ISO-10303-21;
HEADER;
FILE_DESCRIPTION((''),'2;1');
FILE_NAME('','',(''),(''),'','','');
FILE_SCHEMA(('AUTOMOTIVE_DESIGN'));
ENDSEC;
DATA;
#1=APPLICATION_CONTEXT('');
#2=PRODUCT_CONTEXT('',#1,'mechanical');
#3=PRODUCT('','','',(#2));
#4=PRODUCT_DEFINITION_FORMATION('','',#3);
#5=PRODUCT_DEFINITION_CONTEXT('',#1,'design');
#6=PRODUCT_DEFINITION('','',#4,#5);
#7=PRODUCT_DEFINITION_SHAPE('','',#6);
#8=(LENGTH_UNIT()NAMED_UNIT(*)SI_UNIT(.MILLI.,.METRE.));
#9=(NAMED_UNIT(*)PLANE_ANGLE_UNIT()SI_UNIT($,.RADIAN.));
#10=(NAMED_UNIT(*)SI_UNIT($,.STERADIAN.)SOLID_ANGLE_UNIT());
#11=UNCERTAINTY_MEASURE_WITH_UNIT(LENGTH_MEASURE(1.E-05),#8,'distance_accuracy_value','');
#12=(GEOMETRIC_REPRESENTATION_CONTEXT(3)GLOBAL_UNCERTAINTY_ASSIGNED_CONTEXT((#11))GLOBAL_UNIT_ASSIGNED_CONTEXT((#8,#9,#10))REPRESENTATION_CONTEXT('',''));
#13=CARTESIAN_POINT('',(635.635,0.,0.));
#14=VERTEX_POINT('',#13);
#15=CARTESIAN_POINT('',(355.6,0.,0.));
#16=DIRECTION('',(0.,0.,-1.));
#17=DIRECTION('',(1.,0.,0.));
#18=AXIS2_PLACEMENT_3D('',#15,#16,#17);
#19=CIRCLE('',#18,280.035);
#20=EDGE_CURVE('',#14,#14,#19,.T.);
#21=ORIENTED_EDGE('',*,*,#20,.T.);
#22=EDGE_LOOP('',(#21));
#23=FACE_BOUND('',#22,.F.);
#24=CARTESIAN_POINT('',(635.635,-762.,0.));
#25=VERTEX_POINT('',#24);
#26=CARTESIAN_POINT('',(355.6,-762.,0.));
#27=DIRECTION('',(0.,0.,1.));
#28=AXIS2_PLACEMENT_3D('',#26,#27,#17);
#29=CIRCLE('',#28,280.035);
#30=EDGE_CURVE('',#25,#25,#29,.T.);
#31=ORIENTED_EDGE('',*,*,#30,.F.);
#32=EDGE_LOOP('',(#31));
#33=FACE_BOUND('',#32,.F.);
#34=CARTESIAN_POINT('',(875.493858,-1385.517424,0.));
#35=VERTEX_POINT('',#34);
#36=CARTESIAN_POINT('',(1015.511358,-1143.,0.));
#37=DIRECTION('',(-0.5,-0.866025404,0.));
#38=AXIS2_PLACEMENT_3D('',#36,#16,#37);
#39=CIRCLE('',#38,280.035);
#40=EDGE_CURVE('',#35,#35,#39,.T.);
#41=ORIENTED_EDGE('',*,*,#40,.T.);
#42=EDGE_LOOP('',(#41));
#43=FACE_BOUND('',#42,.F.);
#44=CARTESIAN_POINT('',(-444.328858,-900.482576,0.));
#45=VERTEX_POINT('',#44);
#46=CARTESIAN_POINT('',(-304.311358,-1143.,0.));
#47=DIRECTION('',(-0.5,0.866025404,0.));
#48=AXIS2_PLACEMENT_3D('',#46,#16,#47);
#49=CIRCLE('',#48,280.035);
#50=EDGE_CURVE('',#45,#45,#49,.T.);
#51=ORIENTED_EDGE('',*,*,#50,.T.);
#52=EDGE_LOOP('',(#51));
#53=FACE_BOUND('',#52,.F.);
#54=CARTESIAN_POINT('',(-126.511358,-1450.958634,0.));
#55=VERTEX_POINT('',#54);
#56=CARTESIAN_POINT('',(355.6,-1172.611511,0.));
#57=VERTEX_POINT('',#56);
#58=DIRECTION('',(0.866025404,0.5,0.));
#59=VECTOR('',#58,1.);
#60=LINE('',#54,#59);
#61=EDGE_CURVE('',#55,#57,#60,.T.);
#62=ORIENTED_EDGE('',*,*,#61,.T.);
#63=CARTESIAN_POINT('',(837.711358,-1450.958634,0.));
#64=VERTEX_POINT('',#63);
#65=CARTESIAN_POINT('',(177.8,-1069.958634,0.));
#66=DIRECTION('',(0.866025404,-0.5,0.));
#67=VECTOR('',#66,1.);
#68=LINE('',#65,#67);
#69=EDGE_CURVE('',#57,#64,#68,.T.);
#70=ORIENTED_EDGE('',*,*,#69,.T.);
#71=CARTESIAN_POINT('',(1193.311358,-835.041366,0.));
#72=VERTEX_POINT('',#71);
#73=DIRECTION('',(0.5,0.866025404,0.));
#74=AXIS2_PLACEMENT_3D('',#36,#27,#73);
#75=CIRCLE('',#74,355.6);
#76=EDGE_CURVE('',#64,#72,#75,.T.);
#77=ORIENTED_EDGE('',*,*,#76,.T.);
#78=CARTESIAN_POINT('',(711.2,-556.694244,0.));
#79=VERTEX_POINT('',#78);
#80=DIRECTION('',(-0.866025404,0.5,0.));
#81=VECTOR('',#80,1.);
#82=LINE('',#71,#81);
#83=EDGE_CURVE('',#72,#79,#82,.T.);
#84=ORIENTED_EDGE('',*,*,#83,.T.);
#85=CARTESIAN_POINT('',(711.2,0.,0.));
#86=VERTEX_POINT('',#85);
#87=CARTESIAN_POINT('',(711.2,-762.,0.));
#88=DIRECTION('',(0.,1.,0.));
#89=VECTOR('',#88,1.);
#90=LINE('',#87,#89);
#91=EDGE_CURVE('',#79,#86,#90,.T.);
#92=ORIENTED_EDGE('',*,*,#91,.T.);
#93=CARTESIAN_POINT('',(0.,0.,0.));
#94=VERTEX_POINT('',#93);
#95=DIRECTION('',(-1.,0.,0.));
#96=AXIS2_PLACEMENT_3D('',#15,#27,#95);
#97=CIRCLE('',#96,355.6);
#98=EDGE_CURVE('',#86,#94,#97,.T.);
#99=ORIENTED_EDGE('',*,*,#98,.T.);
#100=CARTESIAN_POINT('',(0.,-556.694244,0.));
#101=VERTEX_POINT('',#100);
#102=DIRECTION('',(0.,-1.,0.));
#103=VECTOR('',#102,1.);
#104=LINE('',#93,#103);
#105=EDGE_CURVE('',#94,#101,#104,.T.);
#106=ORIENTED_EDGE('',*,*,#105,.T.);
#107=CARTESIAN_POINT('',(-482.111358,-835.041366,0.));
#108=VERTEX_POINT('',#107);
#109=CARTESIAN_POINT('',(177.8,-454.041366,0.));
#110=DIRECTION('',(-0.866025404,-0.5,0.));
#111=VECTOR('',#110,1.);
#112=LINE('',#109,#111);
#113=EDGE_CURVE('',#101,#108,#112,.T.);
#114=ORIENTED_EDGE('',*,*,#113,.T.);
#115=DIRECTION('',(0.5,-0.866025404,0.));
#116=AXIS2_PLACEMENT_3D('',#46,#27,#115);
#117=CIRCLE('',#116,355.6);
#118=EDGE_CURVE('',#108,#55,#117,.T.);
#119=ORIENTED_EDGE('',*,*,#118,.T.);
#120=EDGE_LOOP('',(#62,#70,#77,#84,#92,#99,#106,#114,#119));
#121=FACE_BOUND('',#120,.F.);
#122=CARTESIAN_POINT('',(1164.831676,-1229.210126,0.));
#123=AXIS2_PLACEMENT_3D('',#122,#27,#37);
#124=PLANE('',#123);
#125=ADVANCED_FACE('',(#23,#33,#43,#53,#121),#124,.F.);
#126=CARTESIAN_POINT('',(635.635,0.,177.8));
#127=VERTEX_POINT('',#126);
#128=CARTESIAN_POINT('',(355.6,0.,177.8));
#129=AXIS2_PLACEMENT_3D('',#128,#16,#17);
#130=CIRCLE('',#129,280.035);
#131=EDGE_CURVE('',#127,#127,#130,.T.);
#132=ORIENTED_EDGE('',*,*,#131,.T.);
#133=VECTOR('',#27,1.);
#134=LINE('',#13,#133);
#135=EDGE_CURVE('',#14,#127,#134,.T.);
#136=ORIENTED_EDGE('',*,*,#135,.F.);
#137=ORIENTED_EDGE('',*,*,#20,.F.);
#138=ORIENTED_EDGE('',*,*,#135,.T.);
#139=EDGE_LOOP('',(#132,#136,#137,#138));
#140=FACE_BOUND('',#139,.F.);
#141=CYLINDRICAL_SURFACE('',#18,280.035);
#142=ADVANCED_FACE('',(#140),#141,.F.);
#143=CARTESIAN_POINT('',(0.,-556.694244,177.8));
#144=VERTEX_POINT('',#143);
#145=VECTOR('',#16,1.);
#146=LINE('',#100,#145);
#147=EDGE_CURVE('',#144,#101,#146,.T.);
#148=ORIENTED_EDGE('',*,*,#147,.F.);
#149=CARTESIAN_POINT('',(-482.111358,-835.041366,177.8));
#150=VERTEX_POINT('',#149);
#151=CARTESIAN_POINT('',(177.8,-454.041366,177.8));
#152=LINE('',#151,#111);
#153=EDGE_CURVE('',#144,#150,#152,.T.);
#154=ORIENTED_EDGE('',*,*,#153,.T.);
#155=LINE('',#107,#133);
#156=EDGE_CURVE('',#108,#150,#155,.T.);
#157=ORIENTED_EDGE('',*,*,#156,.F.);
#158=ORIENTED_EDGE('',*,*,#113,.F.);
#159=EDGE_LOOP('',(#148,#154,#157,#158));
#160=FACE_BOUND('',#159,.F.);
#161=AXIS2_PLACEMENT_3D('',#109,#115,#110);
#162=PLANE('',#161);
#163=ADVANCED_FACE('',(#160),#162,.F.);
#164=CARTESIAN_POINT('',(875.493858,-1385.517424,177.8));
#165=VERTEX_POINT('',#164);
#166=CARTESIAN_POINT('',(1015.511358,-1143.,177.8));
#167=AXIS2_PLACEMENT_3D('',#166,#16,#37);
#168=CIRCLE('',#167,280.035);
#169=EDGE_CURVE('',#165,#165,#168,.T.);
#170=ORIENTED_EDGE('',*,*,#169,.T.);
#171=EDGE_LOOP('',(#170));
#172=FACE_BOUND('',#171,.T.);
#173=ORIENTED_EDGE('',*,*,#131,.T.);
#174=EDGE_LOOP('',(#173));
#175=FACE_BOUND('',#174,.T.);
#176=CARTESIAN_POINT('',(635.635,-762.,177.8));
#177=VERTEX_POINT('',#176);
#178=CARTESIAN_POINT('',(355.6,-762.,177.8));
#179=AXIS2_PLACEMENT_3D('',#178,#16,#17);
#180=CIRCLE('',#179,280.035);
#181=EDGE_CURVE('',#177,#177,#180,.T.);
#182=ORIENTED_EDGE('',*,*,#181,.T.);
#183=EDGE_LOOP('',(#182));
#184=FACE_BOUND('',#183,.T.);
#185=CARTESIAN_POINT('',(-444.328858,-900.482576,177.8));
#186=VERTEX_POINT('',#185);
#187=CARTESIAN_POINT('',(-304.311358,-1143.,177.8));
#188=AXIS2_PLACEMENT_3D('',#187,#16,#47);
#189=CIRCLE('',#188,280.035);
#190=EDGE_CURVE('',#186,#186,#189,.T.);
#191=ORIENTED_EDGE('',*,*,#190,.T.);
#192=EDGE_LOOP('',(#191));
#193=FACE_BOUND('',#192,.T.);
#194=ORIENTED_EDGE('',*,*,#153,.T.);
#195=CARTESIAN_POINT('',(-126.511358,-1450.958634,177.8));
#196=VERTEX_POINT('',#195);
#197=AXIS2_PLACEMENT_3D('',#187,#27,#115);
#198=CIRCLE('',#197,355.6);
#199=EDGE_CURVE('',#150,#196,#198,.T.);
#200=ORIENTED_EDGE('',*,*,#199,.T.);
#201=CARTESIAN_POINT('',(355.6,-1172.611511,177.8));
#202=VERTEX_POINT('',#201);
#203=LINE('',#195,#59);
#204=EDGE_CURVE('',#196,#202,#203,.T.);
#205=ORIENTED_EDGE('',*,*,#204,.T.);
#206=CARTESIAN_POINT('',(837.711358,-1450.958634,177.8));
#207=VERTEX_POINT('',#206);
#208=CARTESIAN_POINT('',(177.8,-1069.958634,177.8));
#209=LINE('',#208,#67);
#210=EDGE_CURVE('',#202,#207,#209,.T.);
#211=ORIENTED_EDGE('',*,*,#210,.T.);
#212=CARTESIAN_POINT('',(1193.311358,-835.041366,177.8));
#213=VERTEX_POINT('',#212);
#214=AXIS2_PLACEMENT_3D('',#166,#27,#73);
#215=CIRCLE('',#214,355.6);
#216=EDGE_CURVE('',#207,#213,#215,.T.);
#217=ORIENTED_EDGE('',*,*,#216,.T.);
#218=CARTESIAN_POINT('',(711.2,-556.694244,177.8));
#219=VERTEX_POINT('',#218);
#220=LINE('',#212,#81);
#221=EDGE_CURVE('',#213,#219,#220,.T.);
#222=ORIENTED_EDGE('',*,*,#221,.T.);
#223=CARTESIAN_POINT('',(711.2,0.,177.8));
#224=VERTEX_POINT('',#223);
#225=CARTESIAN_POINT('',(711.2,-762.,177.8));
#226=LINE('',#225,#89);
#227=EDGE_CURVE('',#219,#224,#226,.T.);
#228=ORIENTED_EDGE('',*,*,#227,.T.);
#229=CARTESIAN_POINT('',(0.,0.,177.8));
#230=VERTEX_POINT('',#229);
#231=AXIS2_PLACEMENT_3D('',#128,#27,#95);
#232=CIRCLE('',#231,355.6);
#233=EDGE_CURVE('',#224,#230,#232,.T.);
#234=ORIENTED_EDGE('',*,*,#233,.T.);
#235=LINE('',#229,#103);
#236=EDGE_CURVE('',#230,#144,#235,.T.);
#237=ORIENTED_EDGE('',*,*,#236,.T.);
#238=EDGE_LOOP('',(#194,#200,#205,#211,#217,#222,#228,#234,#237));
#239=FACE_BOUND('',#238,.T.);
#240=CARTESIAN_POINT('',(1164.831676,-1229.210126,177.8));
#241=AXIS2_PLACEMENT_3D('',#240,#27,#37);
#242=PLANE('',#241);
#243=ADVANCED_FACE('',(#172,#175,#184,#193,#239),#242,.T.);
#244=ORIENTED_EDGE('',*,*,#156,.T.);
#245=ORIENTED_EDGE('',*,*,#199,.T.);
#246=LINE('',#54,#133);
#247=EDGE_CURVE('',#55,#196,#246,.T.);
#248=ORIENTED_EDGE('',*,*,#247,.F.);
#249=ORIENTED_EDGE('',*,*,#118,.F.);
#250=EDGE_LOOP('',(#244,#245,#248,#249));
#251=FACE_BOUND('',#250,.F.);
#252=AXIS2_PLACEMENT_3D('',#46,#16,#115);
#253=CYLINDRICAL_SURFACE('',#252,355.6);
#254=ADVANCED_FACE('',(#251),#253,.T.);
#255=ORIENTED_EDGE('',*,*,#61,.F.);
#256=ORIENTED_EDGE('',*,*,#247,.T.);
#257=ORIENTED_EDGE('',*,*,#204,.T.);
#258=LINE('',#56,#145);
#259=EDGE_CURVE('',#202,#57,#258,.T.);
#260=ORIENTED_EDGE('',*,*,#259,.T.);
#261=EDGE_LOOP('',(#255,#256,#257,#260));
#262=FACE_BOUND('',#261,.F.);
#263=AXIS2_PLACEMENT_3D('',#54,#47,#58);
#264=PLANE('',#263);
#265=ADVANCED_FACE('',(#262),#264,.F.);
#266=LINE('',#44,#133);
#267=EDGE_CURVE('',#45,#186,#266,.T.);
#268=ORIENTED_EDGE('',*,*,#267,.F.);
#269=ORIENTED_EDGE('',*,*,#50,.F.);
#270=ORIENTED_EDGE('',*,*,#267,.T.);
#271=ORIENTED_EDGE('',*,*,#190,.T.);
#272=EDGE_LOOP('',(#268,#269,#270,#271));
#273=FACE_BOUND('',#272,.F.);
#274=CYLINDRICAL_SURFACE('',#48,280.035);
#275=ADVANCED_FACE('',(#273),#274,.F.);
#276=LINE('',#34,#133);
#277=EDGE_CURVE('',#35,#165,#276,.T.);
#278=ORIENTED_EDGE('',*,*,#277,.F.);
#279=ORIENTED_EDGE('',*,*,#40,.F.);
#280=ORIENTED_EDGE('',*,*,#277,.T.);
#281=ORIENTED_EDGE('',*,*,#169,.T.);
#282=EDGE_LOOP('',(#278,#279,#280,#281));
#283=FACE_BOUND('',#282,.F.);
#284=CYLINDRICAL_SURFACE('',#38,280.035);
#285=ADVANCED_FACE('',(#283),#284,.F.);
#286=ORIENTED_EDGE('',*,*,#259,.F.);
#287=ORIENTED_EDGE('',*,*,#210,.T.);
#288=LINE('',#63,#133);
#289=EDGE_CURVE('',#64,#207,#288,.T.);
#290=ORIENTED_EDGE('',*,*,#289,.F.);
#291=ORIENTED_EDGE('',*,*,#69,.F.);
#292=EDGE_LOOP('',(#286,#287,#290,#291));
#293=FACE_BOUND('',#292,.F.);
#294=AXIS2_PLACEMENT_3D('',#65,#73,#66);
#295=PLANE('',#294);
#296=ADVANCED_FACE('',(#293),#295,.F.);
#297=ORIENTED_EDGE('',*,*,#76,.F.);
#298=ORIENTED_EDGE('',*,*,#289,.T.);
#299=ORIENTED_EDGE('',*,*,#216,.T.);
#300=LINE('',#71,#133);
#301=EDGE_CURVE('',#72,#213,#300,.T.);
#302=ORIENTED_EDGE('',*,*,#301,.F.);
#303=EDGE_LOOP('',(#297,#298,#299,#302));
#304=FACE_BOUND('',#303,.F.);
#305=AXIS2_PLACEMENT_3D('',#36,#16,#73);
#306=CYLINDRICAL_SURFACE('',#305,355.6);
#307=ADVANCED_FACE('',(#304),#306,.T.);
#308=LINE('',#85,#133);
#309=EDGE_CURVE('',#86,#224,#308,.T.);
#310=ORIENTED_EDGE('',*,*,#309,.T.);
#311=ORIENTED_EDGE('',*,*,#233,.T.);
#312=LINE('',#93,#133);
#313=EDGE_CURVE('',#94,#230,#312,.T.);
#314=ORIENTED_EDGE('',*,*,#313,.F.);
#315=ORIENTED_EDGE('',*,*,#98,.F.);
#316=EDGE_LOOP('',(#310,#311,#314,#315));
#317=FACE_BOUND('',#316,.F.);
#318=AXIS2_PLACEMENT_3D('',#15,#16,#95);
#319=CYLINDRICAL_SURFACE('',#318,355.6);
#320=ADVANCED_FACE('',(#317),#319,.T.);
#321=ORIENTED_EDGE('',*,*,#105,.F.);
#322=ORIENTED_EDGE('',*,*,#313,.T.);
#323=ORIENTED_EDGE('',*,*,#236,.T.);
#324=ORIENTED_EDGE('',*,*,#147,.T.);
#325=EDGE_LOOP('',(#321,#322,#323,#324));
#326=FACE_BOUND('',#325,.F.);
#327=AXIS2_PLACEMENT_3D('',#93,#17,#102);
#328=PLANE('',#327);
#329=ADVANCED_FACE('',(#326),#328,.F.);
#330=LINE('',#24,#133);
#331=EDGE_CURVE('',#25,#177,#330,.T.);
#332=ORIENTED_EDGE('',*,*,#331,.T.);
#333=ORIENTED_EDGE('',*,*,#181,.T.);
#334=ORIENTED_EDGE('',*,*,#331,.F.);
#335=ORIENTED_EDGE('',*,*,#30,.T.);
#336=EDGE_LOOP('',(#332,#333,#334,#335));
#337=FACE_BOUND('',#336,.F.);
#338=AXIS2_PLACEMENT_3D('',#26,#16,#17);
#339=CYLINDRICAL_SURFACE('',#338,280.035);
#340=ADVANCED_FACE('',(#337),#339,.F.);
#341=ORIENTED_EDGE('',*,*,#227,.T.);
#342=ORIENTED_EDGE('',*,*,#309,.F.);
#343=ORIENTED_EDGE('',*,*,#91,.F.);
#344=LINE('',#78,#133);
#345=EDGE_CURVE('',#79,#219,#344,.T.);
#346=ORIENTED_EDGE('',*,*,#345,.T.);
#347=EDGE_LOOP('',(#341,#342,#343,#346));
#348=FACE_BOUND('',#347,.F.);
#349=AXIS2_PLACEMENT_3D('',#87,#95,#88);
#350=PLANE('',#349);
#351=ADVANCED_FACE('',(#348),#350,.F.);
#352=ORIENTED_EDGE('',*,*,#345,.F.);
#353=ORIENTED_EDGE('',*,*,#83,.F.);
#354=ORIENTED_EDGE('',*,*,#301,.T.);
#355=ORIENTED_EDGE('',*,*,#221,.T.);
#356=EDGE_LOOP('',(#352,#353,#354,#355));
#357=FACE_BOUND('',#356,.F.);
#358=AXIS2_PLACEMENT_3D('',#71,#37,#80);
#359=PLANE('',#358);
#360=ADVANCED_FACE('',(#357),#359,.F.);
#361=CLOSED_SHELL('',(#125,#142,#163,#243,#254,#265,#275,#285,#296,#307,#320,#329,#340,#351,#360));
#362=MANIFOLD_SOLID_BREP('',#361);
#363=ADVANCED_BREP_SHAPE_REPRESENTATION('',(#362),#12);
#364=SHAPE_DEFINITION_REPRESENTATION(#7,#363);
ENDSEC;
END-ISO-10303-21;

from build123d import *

# Parameters (mm, degrees)
F1_DEPTH        = 177.8
F1_COPIES_COUNT = 3


# Not quite as in the source:
# - a feature of the source that left no trace in its solid (it failed there, or was rolled back) is left out
# - a pattern or mirror of a feature is missing from the dataset's text; its kind, count and spacing are read off the source's solid


with BuildPart() as f1:
    # F0 (on Top) → F1 (new body)
    with BuildSketch(Plane.XY):
        with BuildLine():
            ThreePointArc((75.565, 0), (355.6, 280.035), (635.635, 0))
            Line((635.635, 0), (711.2, 0))
            ThreePointArc((711.2, 0), (355.6, 355.6), (0, 0))
            Line((0, 0), (75.565, 0))
        make_face()
        with BuildLine():
            Line((711.2, 0), (635.635, 0))
            ThreePointArc((635.635, 0), (355.6, -280.035), (75.565, 0))
            Line((75.565, 0), (0, 0))
            ThreePointArc((0, 0), (355.6, -355.6), (711.2, 0))
        make_face()
        with BuildLine():
            Line((711.2, -762), (711.2, 0))
            ThreePointArc((711.2, 0), (355.6, -355.6), (0, 0))
            Line((0, 0), (0, -762))
            ThreePointArc((0, -762), (355.6, -406.4), (711.2, -762))
        make_face()
        with BuildLine():
            ThreePointArc((0, -762), (355.6, -1117.6), (711.2, -762))
            Line((711.2, -762), (635.635, -762))
            ThreePointArc((635.635, -762), (355.6, -1042.035), (75.565, -762))
            Line((75.565, -762), (0, -762))
        make_face()
        with BuildLine():
            Line((635.635, -762), (711.2, -762))
            ThreePointArc((711.2, -762), (355.6, -406.4), (0, -762))
            Line((0, -762), (75.565, -762))
            ThreePointArc((75.565, -762), (355.6, -481.965), (635.635, -762))
        make_face()
    extrude(amount=F1_DEPTH)

    # F1_copies: F1 ×3 about axis
    f1_copies_axis = Axis((355.6, -762, 0), (0, 0, 1))


with BuildPart() as f1_1:
    add(f1.part)
    for i in range(1, F1_COPIES_COUNT):
        add(f1.part.rotate(f1_copies_axis, i * 360 / F1_COPIES_COUNT))


solid = f1_1.part
